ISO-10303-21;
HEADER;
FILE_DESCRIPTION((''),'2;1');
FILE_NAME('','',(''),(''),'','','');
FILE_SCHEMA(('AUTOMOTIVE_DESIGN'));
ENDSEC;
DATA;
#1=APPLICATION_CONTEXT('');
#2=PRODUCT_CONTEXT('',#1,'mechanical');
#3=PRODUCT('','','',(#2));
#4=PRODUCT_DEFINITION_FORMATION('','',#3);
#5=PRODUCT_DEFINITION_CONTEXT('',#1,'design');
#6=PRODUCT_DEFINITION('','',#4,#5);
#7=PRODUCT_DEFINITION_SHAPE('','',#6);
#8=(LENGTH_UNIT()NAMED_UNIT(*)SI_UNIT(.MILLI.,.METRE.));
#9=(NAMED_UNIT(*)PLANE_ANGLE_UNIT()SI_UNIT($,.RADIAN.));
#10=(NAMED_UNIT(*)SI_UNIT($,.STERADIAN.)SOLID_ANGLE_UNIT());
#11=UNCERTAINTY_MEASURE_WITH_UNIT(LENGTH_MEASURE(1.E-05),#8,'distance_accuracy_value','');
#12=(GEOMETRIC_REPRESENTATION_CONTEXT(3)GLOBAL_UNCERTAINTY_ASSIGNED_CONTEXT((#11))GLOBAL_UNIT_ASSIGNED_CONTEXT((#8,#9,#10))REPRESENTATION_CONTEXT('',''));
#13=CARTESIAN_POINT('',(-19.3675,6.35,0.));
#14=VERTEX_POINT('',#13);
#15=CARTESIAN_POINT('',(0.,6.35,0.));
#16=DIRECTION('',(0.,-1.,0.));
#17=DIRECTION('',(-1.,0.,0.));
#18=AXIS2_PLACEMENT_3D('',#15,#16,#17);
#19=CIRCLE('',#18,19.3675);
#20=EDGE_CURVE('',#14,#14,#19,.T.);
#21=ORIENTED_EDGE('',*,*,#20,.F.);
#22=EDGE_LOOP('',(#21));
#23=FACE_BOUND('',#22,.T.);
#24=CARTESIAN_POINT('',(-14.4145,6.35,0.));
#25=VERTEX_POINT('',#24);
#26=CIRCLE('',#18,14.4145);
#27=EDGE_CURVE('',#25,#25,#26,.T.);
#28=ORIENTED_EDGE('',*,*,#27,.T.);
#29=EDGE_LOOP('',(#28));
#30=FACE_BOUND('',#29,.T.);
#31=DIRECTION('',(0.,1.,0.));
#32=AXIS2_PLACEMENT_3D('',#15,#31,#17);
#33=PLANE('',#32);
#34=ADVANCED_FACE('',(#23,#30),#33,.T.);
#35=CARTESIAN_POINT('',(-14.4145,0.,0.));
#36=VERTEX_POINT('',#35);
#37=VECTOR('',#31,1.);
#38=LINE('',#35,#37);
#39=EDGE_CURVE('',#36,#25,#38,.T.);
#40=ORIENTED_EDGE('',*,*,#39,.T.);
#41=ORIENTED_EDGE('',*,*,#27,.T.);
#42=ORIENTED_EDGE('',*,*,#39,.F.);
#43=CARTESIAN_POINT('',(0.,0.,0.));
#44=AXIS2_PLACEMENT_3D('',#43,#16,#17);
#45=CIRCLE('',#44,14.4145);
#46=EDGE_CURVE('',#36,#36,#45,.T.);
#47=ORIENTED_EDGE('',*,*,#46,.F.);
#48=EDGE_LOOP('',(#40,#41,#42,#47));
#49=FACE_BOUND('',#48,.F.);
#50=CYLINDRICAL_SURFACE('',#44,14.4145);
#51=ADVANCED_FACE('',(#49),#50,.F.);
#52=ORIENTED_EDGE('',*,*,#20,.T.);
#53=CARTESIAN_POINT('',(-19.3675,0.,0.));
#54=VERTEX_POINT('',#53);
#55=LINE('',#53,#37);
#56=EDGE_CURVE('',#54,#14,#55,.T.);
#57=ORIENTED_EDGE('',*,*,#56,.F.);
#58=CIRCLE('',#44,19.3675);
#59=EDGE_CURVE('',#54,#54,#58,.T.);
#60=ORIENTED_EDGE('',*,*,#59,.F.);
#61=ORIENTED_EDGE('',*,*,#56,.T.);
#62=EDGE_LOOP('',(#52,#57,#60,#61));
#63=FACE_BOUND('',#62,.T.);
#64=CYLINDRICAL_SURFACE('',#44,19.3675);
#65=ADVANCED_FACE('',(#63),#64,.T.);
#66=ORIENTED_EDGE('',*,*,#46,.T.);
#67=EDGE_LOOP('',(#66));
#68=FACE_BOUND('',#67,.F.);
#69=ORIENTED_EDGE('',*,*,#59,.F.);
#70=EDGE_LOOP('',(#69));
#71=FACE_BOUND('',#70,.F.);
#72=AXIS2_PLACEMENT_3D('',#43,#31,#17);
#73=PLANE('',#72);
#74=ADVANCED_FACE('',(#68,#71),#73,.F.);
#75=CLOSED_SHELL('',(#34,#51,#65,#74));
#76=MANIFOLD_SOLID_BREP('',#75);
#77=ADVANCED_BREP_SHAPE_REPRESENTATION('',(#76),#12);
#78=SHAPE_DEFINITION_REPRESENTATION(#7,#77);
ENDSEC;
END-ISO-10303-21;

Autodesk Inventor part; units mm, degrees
ref_plane "YZ Plane" through (0, 0, 0) normal (1, 0, 0) x (0, 1, 0)
ref_plane "XZ Plane" through (0, 0, 0) normal (0, 1, 0) x (-1, 0, 0)
ref_plane "XY Plane" through (0, 0, 0) normal (0, 0, 1) x (1, 0, 0)
sketch "Sketch1" plane through (0, 0, 0) normal (0, 1, 0) x (-1, 0, 0)
  circle A0 centre (0, 0) radius 14.2875
  circle A1 centre (0, 0) radius 19.3675
  dimension "d0" = 28.575
  dimension "d1" = 5.08
extrude "Extrusion1" add sketch "Sketch1" along normal blind 6.35
offset faces "Size1" outward -0.127 faces at (-14.2412, 4.2333, -1.1497)
properties part number "Bearing Press Fit Test -0.01"
